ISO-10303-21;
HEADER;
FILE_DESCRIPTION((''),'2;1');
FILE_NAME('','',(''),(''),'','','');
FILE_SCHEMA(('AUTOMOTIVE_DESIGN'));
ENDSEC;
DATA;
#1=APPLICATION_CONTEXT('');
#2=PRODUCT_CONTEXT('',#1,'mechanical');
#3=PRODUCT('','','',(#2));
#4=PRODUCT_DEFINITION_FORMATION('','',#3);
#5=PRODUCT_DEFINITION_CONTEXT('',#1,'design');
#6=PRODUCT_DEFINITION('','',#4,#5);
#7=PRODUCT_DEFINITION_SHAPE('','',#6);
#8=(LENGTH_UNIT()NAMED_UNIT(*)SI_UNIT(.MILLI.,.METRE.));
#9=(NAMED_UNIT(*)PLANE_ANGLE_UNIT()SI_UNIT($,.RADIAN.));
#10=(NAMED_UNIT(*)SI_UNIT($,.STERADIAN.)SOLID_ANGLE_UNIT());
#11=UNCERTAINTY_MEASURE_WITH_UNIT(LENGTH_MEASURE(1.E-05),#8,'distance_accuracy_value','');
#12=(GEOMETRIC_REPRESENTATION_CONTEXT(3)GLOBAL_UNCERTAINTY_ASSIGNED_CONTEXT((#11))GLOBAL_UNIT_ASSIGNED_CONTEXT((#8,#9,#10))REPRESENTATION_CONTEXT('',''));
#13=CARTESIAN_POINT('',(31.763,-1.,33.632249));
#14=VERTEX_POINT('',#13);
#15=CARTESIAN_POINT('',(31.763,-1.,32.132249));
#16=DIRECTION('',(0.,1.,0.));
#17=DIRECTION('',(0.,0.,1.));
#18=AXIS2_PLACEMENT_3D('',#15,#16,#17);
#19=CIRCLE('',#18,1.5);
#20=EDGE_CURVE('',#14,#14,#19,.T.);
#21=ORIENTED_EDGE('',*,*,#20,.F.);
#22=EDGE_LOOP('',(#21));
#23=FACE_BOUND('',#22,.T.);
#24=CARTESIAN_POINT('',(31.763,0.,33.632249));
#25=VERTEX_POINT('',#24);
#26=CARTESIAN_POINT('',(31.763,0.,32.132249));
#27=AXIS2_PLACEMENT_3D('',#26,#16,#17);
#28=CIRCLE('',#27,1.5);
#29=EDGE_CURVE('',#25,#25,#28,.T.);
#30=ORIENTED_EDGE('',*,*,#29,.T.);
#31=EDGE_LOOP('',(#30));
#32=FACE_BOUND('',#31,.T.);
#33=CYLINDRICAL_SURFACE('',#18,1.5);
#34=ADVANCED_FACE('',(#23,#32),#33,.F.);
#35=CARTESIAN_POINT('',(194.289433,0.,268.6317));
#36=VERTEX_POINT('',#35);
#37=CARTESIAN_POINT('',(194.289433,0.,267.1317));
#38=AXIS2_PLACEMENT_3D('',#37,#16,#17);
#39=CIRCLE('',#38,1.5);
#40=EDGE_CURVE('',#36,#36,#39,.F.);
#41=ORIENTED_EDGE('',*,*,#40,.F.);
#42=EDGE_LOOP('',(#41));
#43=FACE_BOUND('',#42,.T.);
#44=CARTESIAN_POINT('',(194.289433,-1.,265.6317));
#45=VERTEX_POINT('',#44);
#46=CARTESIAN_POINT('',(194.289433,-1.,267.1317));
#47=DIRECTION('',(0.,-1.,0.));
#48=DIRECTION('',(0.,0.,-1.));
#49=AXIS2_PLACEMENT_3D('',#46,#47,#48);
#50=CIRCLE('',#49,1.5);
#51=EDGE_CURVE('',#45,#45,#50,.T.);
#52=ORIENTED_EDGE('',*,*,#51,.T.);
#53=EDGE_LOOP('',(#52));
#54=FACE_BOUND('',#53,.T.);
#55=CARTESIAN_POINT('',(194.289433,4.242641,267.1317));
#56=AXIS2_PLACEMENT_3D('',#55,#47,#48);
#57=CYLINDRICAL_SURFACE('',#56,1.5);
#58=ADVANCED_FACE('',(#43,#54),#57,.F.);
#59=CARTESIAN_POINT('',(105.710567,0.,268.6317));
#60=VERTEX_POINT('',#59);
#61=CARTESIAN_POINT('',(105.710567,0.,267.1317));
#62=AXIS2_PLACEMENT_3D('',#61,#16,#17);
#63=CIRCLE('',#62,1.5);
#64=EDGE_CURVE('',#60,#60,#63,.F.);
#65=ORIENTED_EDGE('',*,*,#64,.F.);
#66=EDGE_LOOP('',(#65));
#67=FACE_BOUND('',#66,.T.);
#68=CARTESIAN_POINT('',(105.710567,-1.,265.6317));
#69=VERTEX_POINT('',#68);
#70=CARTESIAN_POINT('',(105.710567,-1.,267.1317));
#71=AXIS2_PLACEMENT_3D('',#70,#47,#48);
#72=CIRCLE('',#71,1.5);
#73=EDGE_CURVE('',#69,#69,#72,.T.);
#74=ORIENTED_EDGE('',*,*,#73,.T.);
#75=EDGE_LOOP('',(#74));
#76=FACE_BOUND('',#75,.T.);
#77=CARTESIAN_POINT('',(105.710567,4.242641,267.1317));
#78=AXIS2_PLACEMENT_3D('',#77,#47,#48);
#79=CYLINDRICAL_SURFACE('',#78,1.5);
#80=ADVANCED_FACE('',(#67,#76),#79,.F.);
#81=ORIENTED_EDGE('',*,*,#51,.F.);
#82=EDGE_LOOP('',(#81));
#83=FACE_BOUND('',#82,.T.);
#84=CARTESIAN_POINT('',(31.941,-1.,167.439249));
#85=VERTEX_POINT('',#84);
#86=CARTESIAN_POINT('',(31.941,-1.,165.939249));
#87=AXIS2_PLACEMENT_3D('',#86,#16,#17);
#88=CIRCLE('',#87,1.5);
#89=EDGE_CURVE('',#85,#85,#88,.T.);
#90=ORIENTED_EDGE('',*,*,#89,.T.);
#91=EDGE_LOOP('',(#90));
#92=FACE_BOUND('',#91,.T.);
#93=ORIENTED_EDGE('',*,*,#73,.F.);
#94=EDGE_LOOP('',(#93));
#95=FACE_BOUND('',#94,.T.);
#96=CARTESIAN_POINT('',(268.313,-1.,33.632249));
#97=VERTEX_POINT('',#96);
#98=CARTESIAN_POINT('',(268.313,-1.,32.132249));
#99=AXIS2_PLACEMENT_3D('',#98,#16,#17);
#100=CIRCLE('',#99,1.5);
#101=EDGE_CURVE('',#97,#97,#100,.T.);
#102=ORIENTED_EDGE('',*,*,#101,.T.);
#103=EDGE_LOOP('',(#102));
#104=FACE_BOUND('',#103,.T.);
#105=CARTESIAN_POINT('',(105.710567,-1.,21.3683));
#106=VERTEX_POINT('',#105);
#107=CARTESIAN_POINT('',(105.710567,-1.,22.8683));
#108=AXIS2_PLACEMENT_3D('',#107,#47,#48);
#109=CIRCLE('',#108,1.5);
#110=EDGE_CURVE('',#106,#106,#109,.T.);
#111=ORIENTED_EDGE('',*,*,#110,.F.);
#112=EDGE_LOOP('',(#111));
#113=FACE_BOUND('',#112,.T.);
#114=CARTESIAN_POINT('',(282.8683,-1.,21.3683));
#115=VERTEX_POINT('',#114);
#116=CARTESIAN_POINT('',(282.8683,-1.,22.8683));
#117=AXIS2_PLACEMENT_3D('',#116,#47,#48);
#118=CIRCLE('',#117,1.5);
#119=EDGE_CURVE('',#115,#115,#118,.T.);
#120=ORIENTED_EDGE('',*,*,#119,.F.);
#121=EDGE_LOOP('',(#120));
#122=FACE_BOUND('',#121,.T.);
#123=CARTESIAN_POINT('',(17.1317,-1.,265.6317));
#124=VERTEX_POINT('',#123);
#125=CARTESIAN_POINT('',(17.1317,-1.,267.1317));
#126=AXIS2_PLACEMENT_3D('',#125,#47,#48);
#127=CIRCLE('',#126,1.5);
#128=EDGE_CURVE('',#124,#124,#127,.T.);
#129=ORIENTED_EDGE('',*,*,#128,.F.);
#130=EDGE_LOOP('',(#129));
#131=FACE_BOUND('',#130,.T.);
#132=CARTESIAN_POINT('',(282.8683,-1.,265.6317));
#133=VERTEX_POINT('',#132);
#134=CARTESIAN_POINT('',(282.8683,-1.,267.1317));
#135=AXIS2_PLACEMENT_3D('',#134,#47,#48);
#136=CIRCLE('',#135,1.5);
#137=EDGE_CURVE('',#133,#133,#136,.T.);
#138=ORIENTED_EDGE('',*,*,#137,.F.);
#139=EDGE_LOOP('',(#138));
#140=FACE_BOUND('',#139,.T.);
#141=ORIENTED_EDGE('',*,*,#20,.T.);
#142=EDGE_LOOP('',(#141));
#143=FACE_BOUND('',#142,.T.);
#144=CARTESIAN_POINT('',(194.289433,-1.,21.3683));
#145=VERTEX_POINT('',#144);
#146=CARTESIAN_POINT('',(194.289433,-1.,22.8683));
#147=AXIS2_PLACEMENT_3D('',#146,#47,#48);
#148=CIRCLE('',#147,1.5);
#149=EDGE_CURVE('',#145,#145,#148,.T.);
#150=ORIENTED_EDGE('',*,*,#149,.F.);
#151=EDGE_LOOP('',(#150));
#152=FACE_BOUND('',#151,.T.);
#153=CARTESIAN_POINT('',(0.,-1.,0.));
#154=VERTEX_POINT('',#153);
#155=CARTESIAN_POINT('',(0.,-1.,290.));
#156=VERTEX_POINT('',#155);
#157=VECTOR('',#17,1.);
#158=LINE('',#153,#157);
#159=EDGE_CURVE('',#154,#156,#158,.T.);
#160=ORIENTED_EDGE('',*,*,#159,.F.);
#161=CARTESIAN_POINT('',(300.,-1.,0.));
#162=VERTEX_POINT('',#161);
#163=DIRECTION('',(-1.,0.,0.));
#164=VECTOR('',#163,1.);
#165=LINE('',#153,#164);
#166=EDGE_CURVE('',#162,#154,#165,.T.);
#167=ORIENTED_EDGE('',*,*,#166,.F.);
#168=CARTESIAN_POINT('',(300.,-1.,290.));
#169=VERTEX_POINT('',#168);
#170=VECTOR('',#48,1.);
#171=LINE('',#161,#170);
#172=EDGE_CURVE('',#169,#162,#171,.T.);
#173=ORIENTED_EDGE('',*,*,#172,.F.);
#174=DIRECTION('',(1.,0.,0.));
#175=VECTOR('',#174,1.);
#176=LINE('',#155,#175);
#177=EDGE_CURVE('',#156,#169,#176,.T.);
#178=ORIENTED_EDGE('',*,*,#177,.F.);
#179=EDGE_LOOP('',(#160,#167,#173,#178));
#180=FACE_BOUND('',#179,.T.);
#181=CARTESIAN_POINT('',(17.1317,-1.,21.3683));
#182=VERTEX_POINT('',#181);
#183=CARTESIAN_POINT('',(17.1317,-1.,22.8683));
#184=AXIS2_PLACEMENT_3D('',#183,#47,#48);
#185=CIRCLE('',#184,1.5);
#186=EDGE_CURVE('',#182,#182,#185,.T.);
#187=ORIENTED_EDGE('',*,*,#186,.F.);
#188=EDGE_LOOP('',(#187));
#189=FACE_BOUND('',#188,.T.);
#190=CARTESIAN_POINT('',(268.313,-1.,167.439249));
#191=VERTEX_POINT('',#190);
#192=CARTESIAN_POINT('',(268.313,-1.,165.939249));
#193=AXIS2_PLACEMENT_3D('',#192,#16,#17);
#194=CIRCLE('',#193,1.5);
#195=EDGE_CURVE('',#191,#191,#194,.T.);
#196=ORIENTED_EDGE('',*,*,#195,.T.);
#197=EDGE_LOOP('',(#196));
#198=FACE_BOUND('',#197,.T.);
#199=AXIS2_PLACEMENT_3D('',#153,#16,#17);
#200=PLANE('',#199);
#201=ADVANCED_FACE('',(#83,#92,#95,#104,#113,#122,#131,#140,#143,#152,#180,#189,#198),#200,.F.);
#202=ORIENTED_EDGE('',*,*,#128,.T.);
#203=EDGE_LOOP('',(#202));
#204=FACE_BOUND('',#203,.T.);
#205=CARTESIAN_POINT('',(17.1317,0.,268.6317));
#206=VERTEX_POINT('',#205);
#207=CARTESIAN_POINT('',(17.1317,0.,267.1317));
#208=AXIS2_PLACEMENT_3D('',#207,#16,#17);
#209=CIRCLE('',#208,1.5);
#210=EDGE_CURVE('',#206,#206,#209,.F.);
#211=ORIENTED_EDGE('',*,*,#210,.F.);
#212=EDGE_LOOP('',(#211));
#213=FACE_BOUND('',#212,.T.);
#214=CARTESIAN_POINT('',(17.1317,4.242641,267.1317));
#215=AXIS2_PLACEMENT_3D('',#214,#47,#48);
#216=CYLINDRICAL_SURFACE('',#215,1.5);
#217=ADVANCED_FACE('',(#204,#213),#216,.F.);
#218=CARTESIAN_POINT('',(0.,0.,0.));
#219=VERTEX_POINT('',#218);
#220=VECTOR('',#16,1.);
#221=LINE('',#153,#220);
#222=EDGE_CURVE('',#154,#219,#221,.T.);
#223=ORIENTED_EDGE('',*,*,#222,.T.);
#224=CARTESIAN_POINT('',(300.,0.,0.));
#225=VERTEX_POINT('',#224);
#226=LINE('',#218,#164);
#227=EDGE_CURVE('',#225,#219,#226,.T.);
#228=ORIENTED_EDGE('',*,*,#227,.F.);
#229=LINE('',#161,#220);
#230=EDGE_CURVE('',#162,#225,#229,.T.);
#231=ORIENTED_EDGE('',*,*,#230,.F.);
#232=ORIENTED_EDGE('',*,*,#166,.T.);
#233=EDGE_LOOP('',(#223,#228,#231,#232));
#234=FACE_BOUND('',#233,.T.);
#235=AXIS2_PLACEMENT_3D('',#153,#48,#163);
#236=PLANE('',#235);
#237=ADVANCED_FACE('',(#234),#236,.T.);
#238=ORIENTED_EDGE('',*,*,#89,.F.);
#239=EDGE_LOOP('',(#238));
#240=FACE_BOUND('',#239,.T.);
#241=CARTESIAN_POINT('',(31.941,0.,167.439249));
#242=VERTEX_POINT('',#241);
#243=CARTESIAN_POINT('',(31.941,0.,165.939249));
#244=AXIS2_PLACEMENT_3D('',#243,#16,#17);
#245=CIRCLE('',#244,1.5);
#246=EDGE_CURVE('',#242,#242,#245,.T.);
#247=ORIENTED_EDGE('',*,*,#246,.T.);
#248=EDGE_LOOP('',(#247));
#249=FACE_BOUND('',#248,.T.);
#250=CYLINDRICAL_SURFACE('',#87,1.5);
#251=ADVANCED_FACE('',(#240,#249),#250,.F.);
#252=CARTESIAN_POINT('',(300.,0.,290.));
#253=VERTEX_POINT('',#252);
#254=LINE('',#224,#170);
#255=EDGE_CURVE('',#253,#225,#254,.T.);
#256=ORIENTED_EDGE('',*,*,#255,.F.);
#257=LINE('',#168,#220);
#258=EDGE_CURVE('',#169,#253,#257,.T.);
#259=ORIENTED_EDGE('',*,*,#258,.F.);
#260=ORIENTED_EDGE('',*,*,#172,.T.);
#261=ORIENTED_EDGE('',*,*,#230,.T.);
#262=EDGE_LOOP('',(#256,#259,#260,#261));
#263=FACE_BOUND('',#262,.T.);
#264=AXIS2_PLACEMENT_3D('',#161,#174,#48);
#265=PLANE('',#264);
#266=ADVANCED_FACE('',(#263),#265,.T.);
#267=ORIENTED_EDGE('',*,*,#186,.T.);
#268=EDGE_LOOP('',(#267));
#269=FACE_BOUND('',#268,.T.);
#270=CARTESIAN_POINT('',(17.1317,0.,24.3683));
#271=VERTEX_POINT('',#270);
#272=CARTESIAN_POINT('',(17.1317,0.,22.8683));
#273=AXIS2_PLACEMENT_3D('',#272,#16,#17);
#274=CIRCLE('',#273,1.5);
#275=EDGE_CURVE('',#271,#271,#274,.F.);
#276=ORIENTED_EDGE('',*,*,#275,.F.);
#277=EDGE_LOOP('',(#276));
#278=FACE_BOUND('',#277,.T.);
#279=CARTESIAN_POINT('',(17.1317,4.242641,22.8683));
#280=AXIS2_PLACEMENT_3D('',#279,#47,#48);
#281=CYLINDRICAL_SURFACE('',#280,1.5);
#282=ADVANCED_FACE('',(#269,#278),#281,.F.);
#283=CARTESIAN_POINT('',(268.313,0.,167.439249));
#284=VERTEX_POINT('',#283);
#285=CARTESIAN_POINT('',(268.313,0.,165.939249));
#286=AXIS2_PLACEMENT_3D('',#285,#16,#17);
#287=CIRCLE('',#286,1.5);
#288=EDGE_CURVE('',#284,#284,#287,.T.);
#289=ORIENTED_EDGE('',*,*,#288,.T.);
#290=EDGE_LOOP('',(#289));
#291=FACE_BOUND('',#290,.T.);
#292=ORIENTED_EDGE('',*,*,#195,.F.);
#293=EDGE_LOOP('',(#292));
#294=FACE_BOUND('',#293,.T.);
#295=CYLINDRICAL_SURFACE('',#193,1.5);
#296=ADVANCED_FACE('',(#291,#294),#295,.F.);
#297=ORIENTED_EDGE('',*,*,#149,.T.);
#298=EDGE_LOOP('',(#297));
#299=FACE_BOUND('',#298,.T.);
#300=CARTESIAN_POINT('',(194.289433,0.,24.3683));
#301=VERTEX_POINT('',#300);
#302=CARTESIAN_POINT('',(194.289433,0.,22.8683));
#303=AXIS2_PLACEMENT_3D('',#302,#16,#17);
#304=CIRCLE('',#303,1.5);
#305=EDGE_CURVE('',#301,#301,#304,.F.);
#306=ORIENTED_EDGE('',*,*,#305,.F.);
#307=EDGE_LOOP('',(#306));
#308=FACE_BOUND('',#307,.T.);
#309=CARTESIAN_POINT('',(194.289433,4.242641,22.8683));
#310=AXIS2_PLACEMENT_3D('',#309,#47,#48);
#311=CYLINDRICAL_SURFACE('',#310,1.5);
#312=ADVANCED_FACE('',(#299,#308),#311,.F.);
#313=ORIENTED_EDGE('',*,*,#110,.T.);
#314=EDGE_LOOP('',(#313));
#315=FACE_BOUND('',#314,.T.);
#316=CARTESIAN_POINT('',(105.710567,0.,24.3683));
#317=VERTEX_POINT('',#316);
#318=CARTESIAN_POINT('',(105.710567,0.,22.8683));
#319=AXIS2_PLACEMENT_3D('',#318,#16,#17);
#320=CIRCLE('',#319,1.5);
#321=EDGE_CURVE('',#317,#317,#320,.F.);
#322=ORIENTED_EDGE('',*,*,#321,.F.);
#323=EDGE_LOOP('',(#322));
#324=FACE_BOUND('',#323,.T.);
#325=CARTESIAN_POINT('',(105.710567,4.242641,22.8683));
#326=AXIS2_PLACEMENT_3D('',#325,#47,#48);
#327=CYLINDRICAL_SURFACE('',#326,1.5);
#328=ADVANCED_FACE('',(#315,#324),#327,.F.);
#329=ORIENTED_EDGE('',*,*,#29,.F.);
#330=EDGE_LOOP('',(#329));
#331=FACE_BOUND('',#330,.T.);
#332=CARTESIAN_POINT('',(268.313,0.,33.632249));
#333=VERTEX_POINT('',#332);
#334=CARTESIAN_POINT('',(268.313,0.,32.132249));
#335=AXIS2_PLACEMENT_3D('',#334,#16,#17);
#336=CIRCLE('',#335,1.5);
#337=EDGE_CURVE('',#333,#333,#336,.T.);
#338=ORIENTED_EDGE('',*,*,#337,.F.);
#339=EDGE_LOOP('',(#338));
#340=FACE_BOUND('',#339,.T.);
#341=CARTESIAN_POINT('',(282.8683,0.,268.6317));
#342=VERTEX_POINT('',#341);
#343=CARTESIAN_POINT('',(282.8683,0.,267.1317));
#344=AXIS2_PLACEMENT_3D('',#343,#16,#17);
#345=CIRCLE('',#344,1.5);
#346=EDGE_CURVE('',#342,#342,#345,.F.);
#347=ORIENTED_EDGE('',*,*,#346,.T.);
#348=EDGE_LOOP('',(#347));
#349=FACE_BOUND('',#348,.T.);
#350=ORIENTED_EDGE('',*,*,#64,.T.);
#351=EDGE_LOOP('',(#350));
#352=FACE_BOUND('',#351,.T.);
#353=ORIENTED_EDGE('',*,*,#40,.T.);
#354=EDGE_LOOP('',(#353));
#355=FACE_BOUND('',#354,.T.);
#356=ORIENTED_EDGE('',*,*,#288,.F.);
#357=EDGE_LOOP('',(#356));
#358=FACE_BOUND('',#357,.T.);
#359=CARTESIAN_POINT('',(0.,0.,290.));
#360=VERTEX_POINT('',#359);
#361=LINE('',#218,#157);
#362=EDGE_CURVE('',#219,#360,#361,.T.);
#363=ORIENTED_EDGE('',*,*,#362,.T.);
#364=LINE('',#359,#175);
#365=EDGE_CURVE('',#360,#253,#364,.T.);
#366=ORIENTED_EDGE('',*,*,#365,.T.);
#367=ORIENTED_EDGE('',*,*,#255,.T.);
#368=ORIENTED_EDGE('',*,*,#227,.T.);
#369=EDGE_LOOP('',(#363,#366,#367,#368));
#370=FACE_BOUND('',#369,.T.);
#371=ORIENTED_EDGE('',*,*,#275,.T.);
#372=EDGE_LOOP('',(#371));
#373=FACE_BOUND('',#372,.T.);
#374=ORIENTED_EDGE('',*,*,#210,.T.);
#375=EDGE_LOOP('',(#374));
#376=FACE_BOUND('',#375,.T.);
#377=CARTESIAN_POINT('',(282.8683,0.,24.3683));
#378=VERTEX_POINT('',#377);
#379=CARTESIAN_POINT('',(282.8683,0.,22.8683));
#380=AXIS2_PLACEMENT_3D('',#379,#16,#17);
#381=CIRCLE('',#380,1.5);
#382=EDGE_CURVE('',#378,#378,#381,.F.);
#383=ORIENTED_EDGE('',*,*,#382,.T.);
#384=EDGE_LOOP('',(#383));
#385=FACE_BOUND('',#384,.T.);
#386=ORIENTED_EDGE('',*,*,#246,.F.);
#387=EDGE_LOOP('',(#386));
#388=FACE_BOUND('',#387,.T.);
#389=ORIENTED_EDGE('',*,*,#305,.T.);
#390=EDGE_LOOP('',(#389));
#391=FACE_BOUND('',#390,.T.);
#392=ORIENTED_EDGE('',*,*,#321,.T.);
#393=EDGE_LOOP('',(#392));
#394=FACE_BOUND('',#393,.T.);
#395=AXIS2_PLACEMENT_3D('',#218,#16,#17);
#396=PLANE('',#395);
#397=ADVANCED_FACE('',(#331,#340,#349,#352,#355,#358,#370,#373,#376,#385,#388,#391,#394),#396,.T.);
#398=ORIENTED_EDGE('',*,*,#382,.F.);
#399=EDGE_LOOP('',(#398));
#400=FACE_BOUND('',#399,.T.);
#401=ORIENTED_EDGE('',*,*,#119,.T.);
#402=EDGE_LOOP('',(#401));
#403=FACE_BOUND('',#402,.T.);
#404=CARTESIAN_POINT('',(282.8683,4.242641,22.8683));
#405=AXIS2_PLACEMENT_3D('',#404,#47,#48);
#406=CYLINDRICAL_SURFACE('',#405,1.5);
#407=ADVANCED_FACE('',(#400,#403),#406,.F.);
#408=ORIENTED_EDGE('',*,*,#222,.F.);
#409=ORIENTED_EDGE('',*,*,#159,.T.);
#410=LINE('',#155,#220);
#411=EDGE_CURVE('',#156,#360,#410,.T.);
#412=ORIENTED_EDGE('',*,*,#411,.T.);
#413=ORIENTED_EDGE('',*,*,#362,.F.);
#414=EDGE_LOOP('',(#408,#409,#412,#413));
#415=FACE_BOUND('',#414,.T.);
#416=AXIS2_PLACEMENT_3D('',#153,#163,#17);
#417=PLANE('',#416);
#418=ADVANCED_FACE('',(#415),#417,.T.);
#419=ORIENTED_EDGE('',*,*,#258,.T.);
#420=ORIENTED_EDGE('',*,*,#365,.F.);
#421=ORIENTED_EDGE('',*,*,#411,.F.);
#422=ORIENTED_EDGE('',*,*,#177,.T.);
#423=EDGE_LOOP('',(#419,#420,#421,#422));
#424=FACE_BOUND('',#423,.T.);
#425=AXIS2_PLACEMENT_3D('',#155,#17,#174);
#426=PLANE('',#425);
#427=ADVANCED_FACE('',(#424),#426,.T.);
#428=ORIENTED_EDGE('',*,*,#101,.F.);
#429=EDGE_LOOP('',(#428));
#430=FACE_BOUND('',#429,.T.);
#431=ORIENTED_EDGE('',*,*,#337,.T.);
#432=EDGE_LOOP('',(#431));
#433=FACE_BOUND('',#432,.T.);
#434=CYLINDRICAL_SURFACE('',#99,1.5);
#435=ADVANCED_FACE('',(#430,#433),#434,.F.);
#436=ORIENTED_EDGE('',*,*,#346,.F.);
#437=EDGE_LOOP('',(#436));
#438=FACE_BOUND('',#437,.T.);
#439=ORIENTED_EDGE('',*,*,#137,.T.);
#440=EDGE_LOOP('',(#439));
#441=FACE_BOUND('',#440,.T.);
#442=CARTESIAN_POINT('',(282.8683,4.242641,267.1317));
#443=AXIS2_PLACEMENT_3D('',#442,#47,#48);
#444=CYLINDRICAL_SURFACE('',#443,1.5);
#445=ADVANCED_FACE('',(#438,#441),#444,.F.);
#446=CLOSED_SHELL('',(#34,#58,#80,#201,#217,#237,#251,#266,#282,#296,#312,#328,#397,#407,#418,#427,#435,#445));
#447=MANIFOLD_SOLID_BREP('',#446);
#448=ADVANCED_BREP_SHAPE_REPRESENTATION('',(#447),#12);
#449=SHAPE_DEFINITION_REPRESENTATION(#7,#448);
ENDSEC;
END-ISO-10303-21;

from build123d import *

# Parameters (mm, degrees)
SKETCH1_W          = 300
SKETCH1_H          = 290
BASE_FLANGE1_DEPTH = 1
SKETCH7_R          = 1.5
CUT_EXTRUDE1_DEPTH = 1
SKETCH9_R          = 1.5
CUT_EXTRUDE3_DEPTH = 418.254119213


# Sheet-metal steps are written as plain solids
with BuildPart() as part:
    # Sketch1 → Base-Flange1 (new body)
    with BuildSketch(Plane(origin=(0, 0, 0), x_dir=(1, 0, 0), z_dir=(0, 1, 0))):
        with Locations((150, -145)):
            Rectangle(SKETCH1_W, SKETCH1_H)
    extrude(amount=-BASE_FLANGE1_DEPTH)

    # Sketch7 → Cut-Extrude1 (cut)
    with BuildSketch(Plane.XZ.offset(1)):
        with Locations(Location((17.1317, 267.1317, 0), (0, 0, 270))):
            Circle(SKETCH7_R)
        with Locations(Location((105.710566667, 267.1317, 0), (0, 0, 270))):
            Circle(SKETCH7_R)
        with Locations(Location((194.289433333, 267.1317, 0), (0, 0, 270))):
            Circle(SKETCH7_R)
        with Locations(Location((282.8683, 267.1317, 0), (0, 0, 270))):
            Circle(SKETCH7_R)
        with Locations(Location((282.8683, 22.8683, 0), (0, 0, 270))):
            Circle(SKETCH7_R)
        with Locations(Location((194.289433333, 22.8683, 0), (0, 0, 270))):
            Circle(SKETCH7_R)
        with Locations(Location((105.710566667, 22.8683, 0), (0, 0, 270))):
            Circle(SKETCH7_R)
        with Locations(Location((17.1317, 22.8683, 0), (0, 0, 270))):
            Circle(SKETCH7_R)
    extrude(amount=-CUT_EXTRUDE1_DEPTH, mode=Mode.SUBTRACT)

    # Sketch9 → Cut-Extrude3 (cut, through all)
    with BuildSketch(Plane(origin=(0, 0, 0), x_dir=(1, 0, 0), z_dir=(0, 1, 0))):
        with Locations(Location((31.763, -32.132248658, 0), (0, 0, 270))):
            Circle(SKETCH9_R)
        with Locations(Location((31.941, -165.939248658, 0), (0, 0, 270))):
            Circle(SKETCH9_R)
        with Locations(Location((268.313, -165.939248658, 0), (0, 0, 270))):
            Circle(SKETCH9_R)
        with Locations(Location((268.313, -32.132248658, 0), (0, 0, 270))):
            Circle(SKETCH9_R)
    extrude(amount=-CUT_EXTRUDE3_DEPTH, mode=Mode.SUBTRACT)


solid = part.part
